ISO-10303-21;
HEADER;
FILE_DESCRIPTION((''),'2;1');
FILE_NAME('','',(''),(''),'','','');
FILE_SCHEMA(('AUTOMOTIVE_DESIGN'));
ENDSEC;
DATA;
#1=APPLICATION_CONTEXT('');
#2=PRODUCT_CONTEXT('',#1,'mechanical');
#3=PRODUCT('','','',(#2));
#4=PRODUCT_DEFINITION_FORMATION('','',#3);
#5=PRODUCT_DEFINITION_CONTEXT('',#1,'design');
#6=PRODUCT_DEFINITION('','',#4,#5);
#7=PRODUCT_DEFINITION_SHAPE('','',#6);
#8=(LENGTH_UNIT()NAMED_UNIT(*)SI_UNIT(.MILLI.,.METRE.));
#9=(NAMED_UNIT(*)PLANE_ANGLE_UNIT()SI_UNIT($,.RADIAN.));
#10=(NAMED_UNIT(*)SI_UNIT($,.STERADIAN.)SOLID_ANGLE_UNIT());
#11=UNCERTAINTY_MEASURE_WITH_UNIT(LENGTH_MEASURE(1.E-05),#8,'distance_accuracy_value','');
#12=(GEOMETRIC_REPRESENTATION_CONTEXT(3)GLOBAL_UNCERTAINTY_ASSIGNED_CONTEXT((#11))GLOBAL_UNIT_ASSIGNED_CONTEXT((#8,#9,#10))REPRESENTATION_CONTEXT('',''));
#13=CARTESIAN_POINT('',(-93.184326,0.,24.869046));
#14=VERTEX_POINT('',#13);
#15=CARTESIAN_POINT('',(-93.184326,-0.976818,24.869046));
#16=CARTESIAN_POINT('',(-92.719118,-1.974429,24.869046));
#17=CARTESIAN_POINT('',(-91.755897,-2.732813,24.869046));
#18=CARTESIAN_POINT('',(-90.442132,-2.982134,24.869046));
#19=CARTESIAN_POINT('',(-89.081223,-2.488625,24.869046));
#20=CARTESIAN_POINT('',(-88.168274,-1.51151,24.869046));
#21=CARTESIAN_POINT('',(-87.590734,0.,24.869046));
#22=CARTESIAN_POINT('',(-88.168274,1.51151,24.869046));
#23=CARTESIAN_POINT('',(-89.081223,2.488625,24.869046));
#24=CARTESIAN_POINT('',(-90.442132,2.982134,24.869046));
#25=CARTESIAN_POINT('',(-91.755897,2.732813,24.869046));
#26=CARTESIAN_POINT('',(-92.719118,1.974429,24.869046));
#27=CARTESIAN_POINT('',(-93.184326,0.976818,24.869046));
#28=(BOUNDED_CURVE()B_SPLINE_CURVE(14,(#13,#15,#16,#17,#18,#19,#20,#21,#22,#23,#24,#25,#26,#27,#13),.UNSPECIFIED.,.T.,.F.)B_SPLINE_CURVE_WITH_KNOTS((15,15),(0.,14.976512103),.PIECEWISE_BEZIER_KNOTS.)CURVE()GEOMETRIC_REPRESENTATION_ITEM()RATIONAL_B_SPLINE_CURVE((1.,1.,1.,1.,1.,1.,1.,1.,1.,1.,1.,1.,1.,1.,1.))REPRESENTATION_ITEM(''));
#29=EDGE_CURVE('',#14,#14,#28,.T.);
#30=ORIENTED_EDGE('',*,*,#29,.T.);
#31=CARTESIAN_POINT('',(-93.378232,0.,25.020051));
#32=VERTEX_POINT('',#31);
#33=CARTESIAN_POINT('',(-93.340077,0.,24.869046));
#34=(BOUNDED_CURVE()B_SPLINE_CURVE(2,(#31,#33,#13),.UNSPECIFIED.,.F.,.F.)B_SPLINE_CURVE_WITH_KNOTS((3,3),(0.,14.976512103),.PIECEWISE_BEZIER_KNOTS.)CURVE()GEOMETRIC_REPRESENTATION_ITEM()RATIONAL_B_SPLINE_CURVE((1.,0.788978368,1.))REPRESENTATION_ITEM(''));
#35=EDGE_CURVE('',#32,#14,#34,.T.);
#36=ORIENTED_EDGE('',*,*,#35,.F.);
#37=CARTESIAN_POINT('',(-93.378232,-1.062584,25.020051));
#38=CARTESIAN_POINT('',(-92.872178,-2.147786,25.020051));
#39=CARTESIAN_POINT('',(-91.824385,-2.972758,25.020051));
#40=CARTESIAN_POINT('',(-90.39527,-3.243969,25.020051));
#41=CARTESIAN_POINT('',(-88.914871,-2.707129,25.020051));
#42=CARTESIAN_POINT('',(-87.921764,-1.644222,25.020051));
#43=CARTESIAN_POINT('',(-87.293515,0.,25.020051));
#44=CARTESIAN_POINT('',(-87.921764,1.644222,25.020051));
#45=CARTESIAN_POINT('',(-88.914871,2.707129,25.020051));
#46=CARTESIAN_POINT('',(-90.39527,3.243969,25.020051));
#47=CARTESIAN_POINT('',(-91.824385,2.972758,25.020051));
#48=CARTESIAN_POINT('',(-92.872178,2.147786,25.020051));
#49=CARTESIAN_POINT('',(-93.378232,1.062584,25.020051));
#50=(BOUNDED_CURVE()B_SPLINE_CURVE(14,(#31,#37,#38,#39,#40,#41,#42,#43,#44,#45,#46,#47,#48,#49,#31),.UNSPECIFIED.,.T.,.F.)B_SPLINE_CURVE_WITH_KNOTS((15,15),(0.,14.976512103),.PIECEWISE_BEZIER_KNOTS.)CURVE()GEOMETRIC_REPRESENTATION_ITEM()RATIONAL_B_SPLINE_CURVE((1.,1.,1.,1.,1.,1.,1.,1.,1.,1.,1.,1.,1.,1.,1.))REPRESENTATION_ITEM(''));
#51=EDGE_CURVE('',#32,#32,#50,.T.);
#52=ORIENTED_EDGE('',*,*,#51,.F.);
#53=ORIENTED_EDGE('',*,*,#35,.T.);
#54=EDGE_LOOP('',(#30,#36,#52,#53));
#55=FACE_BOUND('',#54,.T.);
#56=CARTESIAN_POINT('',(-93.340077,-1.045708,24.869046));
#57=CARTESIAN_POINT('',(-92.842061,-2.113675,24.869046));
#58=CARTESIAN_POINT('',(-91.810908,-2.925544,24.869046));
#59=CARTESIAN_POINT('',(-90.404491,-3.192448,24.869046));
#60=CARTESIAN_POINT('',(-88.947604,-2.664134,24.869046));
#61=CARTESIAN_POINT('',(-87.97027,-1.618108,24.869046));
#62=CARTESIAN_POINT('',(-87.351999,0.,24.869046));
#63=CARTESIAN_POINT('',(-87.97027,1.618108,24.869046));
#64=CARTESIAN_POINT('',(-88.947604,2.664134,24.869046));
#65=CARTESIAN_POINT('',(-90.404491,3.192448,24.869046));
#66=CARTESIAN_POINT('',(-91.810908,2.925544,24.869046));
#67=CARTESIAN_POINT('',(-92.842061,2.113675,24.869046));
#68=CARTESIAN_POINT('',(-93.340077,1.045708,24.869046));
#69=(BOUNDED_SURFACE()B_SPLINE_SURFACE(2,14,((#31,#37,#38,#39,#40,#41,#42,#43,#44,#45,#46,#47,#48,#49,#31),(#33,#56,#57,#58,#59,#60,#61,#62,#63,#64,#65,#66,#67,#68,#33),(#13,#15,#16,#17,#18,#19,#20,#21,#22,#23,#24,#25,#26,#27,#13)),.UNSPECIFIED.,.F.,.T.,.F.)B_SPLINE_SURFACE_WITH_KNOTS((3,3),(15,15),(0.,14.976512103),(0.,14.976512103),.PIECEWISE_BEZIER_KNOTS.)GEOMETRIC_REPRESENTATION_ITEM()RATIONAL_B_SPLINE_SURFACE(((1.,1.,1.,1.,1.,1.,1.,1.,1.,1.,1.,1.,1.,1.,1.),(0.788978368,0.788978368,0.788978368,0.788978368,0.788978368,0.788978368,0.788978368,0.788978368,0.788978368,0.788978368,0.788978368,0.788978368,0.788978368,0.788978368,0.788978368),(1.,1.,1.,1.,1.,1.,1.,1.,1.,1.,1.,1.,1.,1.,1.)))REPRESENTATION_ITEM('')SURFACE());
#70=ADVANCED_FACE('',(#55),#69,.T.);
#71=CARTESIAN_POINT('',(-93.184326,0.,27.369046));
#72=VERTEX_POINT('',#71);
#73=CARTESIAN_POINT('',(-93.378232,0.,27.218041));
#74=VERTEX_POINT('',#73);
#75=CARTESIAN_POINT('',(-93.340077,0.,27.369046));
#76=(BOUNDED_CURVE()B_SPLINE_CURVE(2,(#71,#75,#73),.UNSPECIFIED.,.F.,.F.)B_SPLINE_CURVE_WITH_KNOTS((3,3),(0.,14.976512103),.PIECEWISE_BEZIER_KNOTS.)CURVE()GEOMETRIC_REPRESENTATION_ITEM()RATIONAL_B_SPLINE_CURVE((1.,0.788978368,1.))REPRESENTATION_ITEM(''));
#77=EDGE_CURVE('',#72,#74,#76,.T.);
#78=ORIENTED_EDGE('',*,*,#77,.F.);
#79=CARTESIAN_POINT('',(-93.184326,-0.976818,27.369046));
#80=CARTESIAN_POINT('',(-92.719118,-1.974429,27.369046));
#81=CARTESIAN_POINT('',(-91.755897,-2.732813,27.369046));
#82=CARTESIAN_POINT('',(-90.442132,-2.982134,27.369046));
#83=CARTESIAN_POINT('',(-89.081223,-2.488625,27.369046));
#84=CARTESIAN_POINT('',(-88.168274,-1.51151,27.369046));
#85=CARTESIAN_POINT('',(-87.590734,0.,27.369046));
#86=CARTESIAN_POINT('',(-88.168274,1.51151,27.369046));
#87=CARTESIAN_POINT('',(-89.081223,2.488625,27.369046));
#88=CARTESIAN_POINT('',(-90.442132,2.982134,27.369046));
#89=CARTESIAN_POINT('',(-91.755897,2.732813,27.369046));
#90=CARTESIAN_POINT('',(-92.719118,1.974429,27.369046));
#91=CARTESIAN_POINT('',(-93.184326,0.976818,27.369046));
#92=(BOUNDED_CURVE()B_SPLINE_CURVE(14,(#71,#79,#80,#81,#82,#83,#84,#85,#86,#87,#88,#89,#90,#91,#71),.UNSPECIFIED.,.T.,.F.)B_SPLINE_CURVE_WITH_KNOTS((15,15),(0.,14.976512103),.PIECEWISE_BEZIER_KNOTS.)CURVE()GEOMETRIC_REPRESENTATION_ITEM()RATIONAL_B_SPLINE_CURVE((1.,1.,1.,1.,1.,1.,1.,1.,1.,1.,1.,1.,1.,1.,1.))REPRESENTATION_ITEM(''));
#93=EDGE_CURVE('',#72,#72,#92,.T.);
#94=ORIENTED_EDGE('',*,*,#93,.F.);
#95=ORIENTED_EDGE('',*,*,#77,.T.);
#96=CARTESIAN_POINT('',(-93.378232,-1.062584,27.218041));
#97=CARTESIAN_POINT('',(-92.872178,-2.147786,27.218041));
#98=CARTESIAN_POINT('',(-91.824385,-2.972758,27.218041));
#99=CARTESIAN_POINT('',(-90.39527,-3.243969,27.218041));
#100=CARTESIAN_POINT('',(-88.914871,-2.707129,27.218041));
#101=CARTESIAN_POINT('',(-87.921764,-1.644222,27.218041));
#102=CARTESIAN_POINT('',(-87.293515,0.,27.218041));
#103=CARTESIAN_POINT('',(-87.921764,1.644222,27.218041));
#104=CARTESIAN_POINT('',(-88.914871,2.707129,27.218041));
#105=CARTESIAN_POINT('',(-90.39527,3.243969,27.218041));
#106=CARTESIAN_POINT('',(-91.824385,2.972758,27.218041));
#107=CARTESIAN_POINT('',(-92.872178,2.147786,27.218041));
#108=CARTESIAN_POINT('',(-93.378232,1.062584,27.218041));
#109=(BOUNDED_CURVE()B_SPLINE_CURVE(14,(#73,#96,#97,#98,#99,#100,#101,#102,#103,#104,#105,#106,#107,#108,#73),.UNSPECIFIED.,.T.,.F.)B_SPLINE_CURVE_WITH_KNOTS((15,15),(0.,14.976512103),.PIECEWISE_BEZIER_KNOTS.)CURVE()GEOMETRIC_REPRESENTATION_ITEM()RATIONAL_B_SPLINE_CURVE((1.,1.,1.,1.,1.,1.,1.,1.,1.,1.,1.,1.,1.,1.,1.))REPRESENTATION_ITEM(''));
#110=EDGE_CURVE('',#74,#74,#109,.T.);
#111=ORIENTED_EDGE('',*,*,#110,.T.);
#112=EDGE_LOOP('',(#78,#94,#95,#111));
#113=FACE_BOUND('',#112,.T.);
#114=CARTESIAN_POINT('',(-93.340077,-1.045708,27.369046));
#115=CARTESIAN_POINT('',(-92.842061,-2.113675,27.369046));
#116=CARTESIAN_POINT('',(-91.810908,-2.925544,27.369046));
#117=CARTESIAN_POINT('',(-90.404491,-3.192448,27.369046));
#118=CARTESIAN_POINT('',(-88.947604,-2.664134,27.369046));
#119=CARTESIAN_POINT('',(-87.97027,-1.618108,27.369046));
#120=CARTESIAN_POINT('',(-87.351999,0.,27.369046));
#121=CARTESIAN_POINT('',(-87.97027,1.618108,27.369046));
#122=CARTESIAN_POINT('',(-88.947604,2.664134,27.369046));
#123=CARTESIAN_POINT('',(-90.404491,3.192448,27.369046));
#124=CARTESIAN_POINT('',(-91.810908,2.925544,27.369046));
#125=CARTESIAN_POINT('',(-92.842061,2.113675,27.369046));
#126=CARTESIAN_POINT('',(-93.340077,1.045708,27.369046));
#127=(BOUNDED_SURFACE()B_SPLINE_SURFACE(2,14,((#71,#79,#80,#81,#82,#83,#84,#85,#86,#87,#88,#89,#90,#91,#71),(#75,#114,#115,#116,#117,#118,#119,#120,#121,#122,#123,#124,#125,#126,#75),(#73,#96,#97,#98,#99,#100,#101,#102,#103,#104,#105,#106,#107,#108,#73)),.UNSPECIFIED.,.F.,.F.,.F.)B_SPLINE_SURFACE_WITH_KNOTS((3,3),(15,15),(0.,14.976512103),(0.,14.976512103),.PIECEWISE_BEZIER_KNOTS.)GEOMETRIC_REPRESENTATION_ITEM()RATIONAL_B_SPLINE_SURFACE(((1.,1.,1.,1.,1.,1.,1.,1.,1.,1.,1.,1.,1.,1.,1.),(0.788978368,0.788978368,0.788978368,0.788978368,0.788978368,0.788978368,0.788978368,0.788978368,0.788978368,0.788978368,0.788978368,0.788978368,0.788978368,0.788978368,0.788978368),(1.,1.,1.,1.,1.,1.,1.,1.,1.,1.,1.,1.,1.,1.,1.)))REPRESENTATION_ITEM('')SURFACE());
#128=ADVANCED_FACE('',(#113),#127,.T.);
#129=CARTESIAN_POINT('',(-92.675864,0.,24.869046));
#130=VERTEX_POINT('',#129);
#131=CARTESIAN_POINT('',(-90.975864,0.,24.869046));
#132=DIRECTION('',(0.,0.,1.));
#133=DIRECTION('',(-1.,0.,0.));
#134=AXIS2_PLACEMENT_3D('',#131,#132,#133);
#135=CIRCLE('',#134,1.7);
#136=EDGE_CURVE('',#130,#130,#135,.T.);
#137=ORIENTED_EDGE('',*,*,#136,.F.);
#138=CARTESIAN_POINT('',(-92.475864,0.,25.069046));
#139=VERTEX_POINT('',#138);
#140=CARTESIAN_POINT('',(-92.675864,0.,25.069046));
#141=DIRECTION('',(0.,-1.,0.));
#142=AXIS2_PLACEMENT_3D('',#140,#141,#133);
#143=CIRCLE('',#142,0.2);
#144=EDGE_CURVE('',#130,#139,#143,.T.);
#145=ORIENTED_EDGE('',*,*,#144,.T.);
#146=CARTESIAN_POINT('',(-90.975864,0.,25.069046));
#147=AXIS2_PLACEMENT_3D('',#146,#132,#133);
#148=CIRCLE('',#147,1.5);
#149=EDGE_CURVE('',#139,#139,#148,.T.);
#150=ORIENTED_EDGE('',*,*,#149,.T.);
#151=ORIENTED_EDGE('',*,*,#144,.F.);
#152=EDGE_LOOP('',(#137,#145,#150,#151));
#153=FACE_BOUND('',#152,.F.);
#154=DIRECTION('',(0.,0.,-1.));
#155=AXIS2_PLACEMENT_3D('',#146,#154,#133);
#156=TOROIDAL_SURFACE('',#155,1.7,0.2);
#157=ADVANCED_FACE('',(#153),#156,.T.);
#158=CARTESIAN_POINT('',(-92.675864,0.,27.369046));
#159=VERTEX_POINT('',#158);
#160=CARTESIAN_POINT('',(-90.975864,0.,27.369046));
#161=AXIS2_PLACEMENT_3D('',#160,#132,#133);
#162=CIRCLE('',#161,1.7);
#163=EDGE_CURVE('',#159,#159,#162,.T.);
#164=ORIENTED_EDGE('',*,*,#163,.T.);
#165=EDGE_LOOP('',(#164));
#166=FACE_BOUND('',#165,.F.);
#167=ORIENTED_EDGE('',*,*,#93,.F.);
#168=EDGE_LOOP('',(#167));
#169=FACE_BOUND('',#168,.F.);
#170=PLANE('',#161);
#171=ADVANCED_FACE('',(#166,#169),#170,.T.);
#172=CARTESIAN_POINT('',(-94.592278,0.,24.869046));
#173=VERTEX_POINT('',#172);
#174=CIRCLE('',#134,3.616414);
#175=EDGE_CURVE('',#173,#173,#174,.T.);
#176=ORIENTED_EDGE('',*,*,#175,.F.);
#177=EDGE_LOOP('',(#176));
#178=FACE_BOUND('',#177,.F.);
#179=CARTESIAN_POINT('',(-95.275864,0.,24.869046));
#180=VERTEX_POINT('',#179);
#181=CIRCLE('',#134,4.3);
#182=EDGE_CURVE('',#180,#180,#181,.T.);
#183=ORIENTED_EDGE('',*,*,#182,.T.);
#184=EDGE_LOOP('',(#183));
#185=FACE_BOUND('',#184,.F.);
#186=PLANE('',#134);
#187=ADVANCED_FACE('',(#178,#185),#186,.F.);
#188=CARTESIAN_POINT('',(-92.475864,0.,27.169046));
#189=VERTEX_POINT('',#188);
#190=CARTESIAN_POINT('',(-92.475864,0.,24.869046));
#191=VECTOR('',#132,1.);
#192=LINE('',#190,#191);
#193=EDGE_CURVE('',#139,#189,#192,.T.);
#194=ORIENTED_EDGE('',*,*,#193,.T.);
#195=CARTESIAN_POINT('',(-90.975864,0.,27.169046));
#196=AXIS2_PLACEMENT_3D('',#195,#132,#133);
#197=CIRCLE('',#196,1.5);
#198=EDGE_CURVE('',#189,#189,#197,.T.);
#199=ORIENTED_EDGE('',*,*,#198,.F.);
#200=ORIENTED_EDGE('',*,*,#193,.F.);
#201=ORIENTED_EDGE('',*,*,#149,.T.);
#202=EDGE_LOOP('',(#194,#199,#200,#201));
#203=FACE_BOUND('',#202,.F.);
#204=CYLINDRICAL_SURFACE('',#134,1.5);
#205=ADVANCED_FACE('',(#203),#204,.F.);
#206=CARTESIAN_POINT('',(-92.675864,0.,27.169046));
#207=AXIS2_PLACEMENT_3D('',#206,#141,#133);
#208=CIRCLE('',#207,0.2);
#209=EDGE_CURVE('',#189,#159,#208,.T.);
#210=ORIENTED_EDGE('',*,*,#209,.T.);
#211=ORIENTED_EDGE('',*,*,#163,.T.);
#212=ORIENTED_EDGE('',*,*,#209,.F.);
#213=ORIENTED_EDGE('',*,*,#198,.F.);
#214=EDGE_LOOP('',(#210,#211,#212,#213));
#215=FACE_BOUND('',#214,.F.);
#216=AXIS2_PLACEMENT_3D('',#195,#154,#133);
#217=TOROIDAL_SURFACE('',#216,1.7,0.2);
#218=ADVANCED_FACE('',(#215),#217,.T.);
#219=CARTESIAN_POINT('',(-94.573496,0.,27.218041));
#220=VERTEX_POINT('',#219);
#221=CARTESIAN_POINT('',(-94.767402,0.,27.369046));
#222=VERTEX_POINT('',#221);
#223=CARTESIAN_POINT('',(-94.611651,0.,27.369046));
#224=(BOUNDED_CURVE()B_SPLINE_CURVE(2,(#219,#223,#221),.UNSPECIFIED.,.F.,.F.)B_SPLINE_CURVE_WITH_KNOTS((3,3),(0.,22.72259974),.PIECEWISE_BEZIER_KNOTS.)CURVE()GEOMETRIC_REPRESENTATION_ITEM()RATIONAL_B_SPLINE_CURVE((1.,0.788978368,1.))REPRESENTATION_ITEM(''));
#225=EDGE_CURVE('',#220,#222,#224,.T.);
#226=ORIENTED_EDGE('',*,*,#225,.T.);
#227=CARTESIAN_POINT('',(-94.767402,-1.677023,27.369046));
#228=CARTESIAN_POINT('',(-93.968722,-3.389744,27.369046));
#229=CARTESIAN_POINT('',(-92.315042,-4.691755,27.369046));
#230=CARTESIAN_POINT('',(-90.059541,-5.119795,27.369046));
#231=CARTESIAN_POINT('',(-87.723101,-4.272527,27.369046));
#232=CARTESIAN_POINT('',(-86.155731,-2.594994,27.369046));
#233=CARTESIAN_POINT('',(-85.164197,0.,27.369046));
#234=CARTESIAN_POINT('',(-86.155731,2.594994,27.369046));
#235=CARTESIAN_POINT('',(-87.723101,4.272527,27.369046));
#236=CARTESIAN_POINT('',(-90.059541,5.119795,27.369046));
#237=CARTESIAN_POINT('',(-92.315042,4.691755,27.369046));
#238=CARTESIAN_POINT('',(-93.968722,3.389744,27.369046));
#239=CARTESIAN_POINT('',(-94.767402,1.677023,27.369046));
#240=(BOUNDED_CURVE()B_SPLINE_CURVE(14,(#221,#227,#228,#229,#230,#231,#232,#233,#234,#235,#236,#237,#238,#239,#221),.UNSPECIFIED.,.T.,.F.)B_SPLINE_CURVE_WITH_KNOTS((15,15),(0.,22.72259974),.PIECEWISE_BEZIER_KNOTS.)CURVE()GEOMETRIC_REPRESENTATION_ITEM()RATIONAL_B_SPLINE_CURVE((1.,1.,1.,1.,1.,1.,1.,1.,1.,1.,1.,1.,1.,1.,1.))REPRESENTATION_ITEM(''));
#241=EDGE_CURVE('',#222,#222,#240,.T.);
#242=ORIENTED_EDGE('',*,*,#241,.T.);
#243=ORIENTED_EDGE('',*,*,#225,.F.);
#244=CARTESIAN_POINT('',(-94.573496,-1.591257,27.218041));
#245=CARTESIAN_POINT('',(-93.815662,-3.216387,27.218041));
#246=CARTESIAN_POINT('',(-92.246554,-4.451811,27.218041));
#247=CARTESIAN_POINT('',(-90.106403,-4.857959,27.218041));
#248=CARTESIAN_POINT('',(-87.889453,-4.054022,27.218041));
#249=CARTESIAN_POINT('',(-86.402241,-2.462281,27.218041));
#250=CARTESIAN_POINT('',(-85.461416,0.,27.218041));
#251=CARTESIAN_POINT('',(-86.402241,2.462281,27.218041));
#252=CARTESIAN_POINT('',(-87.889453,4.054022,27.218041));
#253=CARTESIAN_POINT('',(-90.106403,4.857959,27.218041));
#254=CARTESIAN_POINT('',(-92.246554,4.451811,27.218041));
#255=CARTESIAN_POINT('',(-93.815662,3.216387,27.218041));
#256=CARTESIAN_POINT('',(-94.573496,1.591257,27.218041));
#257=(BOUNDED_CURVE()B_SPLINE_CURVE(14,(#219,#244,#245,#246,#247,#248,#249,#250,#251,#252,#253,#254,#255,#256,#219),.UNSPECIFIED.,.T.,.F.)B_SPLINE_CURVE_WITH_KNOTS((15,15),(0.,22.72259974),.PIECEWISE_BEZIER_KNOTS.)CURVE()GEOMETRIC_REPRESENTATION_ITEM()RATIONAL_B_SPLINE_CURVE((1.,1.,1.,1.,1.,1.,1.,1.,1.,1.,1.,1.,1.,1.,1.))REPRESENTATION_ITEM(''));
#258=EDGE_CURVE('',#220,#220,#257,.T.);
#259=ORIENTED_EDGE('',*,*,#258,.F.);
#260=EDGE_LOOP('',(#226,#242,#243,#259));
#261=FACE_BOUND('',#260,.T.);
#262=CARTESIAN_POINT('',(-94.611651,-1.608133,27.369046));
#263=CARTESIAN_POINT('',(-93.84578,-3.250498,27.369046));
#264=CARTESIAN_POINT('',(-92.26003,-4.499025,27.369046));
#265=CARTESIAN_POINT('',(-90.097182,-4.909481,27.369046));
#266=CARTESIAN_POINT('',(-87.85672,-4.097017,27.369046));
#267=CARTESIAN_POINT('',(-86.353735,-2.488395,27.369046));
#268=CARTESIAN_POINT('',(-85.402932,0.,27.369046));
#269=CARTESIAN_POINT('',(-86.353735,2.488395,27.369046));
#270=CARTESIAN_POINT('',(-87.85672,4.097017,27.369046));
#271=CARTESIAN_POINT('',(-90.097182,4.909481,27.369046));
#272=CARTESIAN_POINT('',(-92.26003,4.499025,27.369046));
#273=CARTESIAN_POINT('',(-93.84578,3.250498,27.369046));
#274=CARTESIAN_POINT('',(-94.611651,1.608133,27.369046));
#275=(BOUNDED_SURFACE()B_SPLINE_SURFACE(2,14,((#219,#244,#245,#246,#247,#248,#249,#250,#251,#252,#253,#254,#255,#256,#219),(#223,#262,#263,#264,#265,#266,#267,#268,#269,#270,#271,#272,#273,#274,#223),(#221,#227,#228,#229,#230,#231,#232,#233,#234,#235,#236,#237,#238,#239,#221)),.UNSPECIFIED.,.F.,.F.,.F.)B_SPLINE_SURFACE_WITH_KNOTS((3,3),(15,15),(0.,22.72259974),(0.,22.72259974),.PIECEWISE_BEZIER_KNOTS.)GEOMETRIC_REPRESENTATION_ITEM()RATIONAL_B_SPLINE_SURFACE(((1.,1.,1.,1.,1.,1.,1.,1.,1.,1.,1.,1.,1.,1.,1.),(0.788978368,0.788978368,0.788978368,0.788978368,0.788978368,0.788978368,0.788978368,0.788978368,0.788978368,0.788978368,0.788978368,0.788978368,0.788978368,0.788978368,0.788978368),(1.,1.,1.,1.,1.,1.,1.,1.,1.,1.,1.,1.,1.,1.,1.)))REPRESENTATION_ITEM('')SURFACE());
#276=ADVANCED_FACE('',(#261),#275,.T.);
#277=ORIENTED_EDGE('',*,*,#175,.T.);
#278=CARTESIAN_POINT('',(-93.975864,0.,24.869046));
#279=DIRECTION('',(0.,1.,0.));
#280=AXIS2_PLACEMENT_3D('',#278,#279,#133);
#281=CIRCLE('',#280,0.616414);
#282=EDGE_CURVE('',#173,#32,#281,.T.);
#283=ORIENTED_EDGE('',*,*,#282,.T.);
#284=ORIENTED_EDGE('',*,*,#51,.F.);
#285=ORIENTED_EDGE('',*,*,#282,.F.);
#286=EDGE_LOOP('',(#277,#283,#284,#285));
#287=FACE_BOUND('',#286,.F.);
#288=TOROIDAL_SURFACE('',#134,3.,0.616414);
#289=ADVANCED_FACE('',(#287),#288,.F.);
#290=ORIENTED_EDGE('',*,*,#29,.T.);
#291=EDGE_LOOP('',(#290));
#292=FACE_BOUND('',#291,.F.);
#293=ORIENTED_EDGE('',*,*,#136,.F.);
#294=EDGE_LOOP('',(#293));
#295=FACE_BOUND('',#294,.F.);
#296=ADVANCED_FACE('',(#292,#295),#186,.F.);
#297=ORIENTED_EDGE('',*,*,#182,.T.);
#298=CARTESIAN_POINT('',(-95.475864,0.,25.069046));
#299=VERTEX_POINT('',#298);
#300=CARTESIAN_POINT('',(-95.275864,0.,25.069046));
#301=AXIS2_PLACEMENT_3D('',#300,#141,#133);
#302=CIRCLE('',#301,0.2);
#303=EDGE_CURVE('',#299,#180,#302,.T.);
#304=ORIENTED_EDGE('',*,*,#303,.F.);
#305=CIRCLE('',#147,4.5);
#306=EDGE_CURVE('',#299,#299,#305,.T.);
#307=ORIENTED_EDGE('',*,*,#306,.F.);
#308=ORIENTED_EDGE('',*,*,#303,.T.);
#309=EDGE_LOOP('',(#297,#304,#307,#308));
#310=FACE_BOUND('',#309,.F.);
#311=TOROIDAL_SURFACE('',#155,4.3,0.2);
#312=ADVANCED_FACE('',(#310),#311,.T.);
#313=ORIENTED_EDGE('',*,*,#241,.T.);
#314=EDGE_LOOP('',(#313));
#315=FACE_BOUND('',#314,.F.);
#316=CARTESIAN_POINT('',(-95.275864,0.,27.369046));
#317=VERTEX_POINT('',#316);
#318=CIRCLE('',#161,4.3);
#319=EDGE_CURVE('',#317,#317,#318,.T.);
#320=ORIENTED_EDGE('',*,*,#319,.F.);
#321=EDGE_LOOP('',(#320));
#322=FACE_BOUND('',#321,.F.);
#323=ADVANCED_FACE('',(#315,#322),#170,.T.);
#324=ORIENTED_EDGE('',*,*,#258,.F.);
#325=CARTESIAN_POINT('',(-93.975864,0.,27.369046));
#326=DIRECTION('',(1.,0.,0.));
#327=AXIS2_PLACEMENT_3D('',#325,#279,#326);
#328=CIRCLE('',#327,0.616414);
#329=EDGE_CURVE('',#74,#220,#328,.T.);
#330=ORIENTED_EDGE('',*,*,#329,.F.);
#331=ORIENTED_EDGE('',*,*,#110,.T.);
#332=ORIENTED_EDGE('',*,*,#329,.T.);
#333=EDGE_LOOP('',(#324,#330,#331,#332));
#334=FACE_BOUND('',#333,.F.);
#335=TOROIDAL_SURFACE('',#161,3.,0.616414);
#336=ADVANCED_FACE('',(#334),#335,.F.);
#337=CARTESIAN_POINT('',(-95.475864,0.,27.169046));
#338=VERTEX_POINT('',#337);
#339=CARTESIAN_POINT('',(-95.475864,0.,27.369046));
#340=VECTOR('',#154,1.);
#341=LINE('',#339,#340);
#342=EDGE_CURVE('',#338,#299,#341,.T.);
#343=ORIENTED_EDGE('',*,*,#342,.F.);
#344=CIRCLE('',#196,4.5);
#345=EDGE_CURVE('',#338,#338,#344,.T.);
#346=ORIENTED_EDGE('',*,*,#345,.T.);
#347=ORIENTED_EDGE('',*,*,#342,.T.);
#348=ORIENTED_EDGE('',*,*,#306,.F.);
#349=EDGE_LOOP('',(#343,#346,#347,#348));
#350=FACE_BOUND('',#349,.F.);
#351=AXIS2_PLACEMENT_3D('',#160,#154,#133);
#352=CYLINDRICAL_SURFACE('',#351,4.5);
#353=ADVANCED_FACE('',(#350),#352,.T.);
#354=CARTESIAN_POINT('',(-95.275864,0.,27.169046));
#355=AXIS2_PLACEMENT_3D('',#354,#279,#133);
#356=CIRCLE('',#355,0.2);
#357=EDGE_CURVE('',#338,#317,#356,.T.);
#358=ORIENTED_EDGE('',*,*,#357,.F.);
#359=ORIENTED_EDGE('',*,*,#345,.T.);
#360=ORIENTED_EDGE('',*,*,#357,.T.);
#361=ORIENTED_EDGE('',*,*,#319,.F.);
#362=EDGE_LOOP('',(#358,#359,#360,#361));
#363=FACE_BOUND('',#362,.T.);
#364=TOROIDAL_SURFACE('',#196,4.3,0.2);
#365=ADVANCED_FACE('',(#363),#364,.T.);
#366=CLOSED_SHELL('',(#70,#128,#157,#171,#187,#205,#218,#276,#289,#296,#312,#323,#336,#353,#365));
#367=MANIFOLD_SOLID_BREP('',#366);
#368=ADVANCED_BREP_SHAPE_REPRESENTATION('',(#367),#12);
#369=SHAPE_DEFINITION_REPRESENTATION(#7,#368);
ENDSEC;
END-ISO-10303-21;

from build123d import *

# Parameters (mm, degrees)
F2_R = 0.2


with BuildPart() as f1:
    # F0 (on Front) → F1 (revolve)
    with BuildSketch(Plane.XZ):
        with BuildLine():
            Line((-95.475864, 27.369046), (-95.475864, 24.869046))
            Line((-95.475864, 24.869046), (-94.5922780685, 24.869046))
            ThreePointArc((-94.5922780685, 24.869046), (-93.975864, 25.4854600685), (-93.3594499315, 24.869046))
            Line((-93.3594499315, 24.869046), (-92.475864, 24.869046))
            Line((-92.475864, 24.869046), (-92.475864, 27.369046))
            Line((-92.475864, 27.369046), (-93.3594499315, 27.369046))
            ThreePointArc((-93.3594499315, 27.369046), (-93.975864, 26.7526319315), (-94.5922780685, 27.369046))
            Line((-94.5922780685, 27.369046), (-95.475864, 27.369046))
        make_face()
    revolve(axis=Axis((-90.975864, 0, 26.1190455), (0, 0, 1)))

    # F2
    f2_edges = [f1.edges().sort_by_distance(p)[0] for p in [
        (-86.475864, 0, 27.369046),
        (-86.475864, 0, 24.869046),
        (-95.475864, 0, 26.119046),
        (-89.475864, 0, 24.869046),
        (-88.592278, 0, 27.369046),
        (-88.592278, 0, 24.869046),
        (-87.35945, 0, 27.369046),
        (-89.475864, 0, 27.369046),
    ]]
    fillet(f2_edges, radius=F2_R)


solid = f1.part
